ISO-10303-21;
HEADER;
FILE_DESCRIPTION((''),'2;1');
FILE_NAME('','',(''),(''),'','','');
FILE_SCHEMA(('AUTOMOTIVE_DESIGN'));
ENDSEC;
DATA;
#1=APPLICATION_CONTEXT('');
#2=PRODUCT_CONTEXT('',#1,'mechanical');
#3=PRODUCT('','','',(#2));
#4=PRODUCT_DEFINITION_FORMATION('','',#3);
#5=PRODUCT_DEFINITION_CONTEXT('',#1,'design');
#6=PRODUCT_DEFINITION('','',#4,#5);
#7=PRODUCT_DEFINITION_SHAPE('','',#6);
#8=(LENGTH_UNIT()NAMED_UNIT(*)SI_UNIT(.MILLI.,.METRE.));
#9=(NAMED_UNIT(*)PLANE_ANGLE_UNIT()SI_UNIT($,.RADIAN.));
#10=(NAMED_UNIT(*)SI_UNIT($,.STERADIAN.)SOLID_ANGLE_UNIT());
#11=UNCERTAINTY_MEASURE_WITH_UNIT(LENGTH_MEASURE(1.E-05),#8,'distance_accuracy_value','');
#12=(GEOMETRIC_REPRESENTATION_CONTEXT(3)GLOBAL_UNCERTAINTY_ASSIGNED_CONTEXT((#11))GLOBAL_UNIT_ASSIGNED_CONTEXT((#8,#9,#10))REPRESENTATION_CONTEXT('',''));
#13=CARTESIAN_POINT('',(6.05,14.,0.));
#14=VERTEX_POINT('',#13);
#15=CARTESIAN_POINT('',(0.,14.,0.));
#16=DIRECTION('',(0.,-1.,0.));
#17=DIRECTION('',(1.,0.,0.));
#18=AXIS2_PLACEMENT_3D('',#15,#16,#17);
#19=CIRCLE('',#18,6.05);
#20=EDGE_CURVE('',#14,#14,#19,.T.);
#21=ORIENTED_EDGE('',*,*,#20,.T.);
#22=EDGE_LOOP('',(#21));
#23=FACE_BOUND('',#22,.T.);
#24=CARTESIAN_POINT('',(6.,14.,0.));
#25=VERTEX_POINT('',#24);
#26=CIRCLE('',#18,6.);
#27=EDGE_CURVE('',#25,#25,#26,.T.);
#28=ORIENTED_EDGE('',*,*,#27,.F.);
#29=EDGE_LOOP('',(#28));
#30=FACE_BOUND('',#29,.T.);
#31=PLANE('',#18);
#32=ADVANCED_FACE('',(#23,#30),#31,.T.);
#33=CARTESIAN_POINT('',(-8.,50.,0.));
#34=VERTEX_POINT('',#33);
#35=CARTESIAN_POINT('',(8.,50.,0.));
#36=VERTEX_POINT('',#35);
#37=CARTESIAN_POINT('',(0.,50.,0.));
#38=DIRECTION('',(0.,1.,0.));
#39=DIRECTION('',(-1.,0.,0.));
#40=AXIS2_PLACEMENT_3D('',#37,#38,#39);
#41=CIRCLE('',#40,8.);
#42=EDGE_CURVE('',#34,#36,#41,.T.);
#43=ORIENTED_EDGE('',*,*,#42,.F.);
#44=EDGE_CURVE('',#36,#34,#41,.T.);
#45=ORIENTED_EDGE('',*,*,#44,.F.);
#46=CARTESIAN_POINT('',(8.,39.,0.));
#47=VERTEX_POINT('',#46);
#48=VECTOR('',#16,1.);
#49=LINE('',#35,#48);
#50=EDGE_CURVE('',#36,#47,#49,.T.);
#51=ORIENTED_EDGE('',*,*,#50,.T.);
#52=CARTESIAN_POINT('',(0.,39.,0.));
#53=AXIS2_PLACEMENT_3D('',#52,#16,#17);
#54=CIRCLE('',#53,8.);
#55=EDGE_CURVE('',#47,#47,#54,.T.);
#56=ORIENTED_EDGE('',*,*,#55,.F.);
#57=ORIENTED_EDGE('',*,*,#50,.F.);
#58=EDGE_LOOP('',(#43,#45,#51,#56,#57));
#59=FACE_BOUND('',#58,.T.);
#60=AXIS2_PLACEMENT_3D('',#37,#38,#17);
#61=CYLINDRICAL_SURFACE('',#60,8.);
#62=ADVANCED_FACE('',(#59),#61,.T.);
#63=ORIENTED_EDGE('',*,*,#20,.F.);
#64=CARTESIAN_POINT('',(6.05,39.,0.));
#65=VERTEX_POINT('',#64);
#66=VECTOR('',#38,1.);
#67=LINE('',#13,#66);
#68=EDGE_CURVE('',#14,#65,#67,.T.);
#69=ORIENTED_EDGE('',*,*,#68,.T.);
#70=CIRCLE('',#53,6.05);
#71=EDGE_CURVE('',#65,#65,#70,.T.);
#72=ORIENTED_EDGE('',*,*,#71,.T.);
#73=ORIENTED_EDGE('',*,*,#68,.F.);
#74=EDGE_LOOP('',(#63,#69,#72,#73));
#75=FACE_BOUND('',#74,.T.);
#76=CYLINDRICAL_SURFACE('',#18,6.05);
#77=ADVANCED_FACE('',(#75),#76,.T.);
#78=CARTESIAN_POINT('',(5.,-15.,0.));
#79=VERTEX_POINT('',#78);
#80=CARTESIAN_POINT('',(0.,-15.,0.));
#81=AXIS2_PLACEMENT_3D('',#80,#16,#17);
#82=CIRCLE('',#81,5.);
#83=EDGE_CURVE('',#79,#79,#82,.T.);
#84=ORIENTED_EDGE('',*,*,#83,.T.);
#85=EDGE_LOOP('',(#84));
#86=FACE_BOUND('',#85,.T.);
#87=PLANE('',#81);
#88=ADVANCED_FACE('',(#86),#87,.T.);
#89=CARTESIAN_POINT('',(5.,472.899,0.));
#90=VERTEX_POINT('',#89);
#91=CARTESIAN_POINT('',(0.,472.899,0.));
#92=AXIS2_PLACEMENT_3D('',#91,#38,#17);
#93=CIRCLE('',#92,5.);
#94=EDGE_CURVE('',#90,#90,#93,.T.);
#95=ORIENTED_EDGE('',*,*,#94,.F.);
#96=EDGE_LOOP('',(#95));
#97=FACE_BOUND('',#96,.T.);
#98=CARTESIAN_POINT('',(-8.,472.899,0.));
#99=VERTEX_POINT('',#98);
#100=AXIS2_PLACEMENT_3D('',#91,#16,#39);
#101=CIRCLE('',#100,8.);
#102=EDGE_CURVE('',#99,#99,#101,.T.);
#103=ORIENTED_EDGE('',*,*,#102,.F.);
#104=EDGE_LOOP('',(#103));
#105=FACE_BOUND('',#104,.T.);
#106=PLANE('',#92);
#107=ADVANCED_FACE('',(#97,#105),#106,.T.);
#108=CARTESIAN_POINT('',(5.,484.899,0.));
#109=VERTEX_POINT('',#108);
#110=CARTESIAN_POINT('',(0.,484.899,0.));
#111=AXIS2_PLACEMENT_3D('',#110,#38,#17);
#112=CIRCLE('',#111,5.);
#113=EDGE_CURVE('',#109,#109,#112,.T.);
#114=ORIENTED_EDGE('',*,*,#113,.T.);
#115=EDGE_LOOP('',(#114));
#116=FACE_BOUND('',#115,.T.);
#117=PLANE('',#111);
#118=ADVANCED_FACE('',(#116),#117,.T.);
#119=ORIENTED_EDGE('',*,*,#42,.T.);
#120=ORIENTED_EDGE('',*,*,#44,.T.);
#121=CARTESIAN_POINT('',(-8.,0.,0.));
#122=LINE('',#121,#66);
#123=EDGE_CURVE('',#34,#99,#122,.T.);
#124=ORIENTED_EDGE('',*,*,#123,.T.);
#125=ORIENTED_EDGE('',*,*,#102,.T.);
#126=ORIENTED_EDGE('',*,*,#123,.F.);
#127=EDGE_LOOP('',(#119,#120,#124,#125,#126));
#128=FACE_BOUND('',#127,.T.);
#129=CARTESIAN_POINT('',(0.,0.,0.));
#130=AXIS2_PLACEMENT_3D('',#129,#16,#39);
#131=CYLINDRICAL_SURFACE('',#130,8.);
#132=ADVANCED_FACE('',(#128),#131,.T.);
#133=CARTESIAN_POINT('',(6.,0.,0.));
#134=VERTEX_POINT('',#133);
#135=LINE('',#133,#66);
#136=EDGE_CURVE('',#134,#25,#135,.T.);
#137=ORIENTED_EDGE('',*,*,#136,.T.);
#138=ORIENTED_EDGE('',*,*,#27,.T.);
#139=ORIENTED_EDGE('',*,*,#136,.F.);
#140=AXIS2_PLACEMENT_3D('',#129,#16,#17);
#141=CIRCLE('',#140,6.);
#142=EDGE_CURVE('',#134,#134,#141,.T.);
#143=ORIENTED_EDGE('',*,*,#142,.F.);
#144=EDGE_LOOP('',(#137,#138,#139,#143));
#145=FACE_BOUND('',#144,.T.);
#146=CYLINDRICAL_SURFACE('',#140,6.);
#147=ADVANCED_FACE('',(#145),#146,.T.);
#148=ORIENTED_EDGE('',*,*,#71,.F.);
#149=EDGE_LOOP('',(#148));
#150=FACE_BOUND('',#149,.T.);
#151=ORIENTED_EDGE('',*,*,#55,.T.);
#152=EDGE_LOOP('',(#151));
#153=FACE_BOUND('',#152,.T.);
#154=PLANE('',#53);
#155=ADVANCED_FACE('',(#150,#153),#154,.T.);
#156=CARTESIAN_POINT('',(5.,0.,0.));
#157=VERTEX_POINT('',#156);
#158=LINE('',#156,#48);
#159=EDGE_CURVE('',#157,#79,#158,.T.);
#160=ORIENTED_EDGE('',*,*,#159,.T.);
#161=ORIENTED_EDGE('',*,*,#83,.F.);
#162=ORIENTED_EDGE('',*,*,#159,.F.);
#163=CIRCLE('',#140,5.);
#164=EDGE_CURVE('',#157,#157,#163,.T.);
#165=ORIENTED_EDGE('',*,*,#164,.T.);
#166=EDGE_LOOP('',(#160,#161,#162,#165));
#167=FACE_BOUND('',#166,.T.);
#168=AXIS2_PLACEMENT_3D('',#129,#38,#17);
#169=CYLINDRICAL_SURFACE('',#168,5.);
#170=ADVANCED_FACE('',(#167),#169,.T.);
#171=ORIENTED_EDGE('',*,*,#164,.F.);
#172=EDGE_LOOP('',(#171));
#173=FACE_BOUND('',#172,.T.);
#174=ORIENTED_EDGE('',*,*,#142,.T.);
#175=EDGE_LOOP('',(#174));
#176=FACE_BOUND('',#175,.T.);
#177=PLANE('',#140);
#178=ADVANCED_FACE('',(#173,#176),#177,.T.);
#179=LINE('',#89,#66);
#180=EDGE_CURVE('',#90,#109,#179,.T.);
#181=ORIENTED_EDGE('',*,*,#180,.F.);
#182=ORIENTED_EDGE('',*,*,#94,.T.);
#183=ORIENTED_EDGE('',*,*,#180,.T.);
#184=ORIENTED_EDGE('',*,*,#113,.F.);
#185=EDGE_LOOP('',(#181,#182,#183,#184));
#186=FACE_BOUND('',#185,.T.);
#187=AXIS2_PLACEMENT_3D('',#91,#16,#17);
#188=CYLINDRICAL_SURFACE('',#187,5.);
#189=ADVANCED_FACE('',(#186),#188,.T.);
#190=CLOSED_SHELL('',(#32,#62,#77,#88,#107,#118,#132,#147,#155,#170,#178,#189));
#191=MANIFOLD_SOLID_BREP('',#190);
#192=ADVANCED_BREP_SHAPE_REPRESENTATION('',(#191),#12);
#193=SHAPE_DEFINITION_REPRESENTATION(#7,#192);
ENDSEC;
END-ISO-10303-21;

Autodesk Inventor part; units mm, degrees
ref_plane "YZ Plane" through (0, 0, 0) normal (1, 0, 0) x (0, 1, 0)
ref_plane "XZ Plane" through (0, 0, 0) normal (0, 1, 0) x (-1, 0, 0)
ref_plane "XY Plane" through (0, 0, 0) normal (0, 0, 1) x (1, 0, 0)
sketch "Sketch1" plane through (0, 0, 0) normal (0, 1, 0) x (-1, 0, 0)
  circle A0 centre (0, 0) radius 8
  dimension "d0" = 16
extrude "Extrusion1" add sketch "Sketch1" along normal blind 500
sketch "Sketch2" plane through (0, 0, 0) normal (0, -1, 0) x (1, 0, 0)
  circle A0 centre (0, 0) radius 8 projected
extrude "Extrusion2" cut sketch "Sketch2" against normal blind 50
sketch "Sketch3" plane through (0, 50, 0) normal (0, -1, 0) x (1, 0, 0)
  circle A0 centre (0, 0) radius 8 projected
extrude "Extrusion3" add sketch "Sketch3" along normal blind 50
sketch "Sketch4" plane through (0, 0, 0) normal (0, -1, 0) x (1, 0, 0)
  circle A0 centre (0, 0) radius 8 projected
  circle A1 centre (0, 0) radius 6
  dimension "d7" = 12
extrude "Extrusion4" cut sketch "Sketch4" against normal blind 14
thread "Thread1" size "M12x1" class "6g" standard "ANSI Metric M Profile" full length
sketch "Sketch6" plane through (0, 14, 0) normal (0, -1, 0) x (1, 0, 0)
  circle A0 centre (0, 0) radius 8 projected
  circle A1 centre (0, 0) radius 6.05
  dimension "d13" = 12.1
extrude "Extrusion5" cut sketch "Sketch6" against normal blind 25
sketch "Sketch7" plane through (0, 0, 0) normal (0, -1, 0) x (1, 0, 0)
  circle A0 centre (0, 0) radius 6 projected
  circle A1 centre (0, 0) radius 5
  dimension "d16" = 10
extrude "Extrusion6" add sketch "Sketch7" along normal blind 15 contours A1
sketch "Sketch8" plane through (0, 500, 0) normal (0, 1, 0) x (1, 0, 0)
  circle A0 centre (0, 0) radius 8 projected
extrude "Extrusion7" cut sketch "Sketch8" against normal blind 27.101
sketch "Sketch9" plane through (0, 472.899, 0) normal (0, 1, 0) x (1, 0, 0)
  circle A0 centre (0, 0) radius 8 projected
  circle A1 centre (0, 0) radius 5
  dimension "d21" = 10
extrude "Extrusion8" add sketch "Sketch9" along normal blind 12 contours A1
properties part number "1605_550mm"
